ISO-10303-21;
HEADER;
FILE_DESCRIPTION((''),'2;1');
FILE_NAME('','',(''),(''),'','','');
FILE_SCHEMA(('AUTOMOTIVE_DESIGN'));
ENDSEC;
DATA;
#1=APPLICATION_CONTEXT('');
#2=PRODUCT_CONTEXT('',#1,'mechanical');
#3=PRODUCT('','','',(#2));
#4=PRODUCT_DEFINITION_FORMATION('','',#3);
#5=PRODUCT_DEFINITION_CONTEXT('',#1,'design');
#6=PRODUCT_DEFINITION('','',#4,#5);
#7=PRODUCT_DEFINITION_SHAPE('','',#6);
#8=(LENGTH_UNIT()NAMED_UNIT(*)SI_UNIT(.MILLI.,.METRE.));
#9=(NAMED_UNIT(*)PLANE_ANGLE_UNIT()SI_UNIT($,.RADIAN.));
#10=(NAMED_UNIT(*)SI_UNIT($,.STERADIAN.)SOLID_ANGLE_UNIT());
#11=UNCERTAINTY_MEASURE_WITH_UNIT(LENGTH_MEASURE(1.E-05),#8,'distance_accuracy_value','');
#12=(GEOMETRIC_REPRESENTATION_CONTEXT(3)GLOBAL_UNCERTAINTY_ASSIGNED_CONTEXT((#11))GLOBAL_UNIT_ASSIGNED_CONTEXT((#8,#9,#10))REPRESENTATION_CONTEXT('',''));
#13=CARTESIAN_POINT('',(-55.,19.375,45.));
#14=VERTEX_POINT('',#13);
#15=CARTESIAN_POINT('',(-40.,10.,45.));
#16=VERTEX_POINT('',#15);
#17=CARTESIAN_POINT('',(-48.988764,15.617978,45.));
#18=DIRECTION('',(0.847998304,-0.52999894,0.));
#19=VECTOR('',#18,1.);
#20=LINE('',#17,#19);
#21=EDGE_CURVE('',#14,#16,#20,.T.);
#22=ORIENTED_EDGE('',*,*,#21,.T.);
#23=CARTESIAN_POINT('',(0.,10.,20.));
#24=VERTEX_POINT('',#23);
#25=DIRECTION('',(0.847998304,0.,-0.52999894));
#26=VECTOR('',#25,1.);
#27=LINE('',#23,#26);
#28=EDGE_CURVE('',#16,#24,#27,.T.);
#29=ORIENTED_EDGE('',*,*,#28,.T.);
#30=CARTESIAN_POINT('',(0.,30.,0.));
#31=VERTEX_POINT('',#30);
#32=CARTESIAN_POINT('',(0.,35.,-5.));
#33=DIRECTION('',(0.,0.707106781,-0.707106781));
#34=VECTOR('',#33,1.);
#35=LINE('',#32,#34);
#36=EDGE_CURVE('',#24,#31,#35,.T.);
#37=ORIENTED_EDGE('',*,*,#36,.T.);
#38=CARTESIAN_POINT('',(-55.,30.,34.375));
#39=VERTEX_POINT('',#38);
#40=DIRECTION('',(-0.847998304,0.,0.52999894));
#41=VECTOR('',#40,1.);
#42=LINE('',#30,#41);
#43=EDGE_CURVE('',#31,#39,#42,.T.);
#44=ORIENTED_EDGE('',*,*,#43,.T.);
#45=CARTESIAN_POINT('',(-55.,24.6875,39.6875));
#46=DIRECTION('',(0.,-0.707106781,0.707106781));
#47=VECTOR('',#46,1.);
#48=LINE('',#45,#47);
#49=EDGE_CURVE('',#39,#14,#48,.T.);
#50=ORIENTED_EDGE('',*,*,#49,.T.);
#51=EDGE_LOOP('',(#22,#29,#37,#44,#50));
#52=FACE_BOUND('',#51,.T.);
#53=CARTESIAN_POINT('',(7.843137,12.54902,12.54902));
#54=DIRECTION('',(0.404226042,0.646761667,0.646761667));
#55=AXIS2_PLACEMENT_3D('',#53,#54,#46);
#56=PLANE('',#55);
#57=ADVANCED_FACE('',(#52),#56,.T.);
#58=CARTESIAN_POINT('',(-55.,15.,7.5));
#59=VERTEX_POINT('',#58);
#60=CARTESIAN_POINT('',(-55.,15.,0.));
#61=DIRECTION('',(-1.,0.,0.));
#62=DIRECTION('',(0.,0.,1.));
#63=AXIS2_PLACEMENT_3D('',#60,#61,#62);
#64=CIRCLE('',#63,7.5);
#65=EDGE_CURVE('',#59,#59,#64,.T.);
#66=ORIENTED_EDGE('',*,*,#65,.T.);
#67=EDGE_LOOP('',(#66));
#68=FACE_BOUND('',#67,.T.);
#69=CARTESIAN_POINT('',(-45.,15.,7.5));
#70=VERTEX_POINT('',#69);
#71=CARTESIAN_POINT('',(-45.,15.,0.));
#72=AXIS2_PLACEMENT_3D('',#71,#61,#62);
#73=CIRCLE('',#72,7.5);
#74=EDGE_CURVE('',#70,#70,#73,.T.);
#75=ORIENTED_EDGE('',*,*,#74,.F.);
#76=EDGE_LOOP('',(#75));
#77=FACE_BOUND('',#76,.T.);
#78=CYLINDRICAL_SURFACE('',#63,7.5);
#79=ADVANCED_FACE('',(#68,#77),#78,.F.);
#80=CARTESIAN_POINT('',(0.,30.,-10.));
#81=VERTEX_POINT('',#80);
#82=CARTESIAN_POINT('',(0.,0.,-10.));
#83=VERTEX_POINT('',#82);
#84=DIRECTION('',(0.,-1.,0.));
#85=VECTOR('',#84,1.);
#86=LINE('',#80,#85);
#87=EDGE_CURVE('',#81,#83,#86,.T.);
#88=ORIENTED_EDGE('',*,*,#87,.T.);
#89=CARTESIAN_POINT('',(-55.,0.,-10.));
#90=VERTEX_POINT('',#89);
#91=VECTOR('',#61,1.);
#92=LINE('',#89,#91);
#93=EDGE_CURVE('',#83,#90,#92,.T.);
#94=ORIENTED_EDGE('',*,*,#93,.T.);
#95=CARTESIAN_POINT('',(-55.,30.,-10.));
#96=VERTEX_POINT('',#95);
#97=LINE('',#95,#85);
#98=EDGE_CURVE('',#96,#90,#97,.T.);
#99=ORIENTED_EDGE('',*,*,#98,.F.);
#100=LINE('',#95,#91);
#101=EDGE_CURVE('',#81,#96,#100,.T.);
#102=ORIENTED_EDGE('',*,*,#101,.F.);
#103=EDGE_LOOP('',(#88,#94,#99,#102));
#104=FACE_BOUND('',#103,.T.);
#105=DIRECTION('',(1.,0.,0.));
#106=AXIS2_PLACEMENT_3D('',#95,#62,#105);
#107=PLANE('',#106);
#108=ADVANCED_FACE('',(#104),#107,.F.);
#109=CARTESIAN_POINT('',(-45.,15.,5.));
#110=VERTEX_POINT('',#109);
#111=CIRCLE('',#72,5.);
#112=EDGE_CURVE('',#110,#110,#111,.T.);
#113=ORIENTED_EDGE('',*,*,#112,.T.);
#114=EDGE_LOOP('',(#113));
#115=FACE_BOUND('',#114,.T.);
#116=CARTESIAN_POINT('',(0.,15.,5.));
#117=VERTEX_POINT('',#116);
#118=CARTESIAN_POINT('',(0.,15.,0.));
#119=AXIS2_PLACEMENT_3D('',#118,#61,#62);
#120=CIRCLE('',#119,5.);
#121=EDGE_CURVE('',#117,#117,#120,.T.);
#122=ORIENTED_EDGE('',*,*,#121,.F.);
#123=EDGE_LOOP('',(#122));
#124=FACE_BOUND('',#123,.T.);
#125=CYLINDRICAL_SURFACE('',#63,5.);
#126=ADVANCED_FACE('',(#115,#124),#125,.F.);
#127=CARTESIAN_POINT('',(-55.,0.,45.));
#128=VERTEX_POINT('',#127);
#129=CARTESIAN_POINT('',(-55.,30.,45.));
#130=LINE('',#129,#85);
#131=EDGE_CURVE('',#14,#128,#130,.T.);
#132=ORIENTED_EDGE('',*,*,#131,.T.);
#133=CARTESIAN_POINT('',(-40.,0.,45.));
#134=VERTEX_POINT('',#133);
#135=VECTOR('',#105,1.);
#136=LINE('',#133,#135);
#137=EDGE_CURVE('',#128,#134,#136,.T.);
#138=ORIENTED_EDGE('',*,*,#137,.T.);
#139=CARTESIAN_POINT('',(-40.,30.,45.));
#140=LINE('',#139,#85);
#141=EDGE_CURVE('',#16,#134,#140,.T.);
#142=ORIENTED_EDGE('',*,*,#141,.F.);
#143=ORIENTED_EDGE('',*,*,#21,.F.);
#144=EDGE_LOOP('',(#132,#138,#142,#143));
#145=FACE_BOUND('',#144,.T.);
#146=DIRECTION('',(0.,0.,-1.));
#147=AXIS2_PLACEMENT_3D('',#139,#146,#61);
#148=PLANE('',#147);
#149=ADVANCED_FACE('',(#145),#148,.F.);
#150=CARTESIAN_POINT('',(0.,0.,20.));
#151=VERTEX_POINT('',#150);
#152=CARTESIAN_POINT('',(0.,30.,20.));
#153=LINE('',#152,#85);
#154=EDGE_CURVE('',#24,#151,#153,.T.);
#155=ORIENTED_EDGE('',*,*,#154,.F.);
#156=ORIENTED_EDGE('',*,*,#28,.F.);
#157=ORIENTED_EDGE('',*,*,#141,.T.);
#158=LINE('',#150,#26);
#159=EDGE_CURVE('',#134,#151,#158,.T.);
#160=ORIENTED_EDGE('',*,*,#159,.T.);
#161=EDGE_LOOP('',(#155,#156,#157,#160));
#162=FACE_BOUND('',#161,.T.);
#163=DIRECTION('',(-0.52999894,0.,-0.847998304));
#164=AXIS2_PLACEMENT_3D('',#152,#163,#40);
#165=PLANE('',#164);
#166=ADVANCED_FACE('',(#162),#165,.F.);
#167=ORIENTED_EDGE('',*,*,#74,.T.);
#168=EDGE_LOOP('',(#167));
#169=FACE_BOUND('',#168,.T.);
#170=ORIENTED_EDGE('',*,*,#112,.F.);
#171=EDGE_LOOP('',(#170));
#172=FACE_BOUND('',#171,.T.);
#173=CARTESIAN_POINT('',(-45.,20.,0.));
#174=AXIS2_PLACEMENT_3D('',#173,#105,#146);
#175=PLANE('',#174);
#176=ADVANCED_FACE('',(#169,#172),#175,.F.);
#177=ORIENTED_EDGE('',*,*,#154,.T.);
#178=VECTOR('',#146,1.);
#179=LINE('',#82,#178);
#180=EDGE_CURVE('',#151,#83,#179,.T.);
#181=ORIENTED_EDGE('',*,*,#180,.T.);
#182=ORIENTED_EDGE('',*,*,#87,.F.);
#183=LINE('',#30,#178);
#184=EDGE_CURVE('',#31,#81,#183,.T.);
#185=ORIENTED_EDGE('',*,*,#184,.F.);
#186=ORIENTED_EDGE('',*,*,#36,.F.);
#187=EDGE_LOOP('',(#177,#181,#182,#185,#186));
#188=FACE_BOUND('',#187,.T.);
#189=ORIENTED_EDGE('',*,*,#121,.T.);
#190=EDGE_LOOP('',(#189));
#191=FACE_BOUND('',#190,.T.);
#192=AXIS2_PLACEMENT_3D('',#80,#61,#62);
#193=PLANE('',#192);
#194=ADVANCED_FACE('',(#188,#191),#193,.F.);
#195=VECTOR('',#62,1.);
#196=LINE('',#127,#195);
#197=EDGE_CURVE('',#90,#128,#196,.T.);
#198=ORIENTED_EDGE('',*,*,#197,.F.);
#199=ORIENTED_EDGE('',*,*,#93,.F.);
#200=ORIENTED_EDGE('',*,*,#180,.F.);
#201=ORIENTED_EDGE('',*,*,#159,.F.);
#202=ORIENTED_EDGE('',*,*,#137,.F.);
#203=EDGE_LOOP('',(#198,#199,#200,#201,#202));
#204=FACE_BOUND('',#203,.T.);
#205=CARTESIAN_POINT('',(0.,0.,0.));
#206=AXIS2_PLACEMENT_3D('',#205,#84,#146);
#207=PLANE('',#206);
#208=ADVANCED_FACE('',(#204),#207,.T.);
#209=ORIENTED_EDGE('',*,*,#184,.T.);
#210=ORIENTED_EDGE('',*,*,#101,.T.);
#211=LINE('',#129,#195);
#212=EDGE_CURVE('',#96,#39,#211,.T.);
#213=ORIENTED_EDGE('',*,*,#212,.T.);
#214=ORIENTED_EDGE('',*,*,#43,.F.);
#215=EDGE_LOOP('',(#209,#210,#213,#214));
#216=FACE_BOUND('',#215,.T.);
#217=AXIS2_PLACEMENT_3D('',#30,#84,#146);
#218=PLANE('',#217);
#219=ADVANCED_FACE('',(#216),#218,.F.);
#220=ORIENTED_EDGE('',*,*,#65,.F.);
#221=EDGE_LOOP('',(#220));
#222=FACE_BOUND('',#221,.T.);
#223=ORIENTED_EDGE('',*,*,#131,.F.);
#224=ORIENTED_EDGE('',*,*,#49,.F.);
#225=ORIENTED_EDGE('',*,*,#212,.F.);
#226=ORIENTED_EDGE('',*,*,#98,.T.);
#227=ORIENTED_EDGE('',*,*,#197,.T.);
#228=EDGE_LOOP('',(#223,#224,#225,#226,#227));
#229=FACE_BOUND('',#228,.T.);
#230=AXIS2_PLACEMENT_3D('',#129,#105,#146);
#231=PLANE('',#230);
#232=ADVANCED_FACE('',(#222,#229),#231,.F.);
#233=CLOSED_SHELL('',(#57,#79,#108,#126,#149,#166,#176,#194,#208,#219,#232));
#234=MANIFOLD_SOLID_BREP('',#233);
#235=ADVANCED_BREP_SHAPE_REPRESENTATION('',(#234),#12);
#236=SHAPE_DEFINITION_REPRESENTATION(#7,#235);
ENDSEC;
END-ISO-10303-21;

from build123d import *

# Parameters (mm, degrees)
BOSS_EXTRUDE1_DEPTH = 30
INTERSECT1_START    = -64
INTERSECT1_DEPTH    = 64
HOLE1_D             = 10
HOLE1_CBORE_D       = 15
HOLE1_CBORE_DEPTH   = 10


with BuildPart() as part:
    # Sketch2 → Boss-Extrude1 (new body)
    with BuildSketch(Plane(origin=(0, 0, 0), x_dir=(1, 0, 0), z_dir=(0, 1, 0))):
        Polygon((0, 10), (0, 0), (0, -20), (-40, -45), (-55, -45), (-55, 10), align=None)
    extrude(amount=BOSS_EXTRUDE1_DEPTH)

    # Intersect1: read off the stored shape, not the designer's step
    # Intersect1 outline → Intersect1 (cut)
    with BuildSketch(Plane(origin=(0, 0, 0), x_dir=(0.5299989400031803, 0.8479983040050878, 0), z_dir=(0.8479983040050877, -0.5299989400031807, 0)).offset(INTERSECT1_START)):
        Polygon((-12.71997456, 45), (26.287947424, -1), (27, -1), (27, 45), align=None)
    extrude(amount=INTERSECT1_DEPTH, mode=Mode.SUBTRACT)

    # Hole1 (through all)
    with Locations(Plane.ZY.offset(55)):
        with Locations((0, 15)):
            CounterBoreHole(HOLE1_D / 2, HOLE1_CBORE_D / 2, HOLE1_CBORE_DEPTH)


solid = part.part
